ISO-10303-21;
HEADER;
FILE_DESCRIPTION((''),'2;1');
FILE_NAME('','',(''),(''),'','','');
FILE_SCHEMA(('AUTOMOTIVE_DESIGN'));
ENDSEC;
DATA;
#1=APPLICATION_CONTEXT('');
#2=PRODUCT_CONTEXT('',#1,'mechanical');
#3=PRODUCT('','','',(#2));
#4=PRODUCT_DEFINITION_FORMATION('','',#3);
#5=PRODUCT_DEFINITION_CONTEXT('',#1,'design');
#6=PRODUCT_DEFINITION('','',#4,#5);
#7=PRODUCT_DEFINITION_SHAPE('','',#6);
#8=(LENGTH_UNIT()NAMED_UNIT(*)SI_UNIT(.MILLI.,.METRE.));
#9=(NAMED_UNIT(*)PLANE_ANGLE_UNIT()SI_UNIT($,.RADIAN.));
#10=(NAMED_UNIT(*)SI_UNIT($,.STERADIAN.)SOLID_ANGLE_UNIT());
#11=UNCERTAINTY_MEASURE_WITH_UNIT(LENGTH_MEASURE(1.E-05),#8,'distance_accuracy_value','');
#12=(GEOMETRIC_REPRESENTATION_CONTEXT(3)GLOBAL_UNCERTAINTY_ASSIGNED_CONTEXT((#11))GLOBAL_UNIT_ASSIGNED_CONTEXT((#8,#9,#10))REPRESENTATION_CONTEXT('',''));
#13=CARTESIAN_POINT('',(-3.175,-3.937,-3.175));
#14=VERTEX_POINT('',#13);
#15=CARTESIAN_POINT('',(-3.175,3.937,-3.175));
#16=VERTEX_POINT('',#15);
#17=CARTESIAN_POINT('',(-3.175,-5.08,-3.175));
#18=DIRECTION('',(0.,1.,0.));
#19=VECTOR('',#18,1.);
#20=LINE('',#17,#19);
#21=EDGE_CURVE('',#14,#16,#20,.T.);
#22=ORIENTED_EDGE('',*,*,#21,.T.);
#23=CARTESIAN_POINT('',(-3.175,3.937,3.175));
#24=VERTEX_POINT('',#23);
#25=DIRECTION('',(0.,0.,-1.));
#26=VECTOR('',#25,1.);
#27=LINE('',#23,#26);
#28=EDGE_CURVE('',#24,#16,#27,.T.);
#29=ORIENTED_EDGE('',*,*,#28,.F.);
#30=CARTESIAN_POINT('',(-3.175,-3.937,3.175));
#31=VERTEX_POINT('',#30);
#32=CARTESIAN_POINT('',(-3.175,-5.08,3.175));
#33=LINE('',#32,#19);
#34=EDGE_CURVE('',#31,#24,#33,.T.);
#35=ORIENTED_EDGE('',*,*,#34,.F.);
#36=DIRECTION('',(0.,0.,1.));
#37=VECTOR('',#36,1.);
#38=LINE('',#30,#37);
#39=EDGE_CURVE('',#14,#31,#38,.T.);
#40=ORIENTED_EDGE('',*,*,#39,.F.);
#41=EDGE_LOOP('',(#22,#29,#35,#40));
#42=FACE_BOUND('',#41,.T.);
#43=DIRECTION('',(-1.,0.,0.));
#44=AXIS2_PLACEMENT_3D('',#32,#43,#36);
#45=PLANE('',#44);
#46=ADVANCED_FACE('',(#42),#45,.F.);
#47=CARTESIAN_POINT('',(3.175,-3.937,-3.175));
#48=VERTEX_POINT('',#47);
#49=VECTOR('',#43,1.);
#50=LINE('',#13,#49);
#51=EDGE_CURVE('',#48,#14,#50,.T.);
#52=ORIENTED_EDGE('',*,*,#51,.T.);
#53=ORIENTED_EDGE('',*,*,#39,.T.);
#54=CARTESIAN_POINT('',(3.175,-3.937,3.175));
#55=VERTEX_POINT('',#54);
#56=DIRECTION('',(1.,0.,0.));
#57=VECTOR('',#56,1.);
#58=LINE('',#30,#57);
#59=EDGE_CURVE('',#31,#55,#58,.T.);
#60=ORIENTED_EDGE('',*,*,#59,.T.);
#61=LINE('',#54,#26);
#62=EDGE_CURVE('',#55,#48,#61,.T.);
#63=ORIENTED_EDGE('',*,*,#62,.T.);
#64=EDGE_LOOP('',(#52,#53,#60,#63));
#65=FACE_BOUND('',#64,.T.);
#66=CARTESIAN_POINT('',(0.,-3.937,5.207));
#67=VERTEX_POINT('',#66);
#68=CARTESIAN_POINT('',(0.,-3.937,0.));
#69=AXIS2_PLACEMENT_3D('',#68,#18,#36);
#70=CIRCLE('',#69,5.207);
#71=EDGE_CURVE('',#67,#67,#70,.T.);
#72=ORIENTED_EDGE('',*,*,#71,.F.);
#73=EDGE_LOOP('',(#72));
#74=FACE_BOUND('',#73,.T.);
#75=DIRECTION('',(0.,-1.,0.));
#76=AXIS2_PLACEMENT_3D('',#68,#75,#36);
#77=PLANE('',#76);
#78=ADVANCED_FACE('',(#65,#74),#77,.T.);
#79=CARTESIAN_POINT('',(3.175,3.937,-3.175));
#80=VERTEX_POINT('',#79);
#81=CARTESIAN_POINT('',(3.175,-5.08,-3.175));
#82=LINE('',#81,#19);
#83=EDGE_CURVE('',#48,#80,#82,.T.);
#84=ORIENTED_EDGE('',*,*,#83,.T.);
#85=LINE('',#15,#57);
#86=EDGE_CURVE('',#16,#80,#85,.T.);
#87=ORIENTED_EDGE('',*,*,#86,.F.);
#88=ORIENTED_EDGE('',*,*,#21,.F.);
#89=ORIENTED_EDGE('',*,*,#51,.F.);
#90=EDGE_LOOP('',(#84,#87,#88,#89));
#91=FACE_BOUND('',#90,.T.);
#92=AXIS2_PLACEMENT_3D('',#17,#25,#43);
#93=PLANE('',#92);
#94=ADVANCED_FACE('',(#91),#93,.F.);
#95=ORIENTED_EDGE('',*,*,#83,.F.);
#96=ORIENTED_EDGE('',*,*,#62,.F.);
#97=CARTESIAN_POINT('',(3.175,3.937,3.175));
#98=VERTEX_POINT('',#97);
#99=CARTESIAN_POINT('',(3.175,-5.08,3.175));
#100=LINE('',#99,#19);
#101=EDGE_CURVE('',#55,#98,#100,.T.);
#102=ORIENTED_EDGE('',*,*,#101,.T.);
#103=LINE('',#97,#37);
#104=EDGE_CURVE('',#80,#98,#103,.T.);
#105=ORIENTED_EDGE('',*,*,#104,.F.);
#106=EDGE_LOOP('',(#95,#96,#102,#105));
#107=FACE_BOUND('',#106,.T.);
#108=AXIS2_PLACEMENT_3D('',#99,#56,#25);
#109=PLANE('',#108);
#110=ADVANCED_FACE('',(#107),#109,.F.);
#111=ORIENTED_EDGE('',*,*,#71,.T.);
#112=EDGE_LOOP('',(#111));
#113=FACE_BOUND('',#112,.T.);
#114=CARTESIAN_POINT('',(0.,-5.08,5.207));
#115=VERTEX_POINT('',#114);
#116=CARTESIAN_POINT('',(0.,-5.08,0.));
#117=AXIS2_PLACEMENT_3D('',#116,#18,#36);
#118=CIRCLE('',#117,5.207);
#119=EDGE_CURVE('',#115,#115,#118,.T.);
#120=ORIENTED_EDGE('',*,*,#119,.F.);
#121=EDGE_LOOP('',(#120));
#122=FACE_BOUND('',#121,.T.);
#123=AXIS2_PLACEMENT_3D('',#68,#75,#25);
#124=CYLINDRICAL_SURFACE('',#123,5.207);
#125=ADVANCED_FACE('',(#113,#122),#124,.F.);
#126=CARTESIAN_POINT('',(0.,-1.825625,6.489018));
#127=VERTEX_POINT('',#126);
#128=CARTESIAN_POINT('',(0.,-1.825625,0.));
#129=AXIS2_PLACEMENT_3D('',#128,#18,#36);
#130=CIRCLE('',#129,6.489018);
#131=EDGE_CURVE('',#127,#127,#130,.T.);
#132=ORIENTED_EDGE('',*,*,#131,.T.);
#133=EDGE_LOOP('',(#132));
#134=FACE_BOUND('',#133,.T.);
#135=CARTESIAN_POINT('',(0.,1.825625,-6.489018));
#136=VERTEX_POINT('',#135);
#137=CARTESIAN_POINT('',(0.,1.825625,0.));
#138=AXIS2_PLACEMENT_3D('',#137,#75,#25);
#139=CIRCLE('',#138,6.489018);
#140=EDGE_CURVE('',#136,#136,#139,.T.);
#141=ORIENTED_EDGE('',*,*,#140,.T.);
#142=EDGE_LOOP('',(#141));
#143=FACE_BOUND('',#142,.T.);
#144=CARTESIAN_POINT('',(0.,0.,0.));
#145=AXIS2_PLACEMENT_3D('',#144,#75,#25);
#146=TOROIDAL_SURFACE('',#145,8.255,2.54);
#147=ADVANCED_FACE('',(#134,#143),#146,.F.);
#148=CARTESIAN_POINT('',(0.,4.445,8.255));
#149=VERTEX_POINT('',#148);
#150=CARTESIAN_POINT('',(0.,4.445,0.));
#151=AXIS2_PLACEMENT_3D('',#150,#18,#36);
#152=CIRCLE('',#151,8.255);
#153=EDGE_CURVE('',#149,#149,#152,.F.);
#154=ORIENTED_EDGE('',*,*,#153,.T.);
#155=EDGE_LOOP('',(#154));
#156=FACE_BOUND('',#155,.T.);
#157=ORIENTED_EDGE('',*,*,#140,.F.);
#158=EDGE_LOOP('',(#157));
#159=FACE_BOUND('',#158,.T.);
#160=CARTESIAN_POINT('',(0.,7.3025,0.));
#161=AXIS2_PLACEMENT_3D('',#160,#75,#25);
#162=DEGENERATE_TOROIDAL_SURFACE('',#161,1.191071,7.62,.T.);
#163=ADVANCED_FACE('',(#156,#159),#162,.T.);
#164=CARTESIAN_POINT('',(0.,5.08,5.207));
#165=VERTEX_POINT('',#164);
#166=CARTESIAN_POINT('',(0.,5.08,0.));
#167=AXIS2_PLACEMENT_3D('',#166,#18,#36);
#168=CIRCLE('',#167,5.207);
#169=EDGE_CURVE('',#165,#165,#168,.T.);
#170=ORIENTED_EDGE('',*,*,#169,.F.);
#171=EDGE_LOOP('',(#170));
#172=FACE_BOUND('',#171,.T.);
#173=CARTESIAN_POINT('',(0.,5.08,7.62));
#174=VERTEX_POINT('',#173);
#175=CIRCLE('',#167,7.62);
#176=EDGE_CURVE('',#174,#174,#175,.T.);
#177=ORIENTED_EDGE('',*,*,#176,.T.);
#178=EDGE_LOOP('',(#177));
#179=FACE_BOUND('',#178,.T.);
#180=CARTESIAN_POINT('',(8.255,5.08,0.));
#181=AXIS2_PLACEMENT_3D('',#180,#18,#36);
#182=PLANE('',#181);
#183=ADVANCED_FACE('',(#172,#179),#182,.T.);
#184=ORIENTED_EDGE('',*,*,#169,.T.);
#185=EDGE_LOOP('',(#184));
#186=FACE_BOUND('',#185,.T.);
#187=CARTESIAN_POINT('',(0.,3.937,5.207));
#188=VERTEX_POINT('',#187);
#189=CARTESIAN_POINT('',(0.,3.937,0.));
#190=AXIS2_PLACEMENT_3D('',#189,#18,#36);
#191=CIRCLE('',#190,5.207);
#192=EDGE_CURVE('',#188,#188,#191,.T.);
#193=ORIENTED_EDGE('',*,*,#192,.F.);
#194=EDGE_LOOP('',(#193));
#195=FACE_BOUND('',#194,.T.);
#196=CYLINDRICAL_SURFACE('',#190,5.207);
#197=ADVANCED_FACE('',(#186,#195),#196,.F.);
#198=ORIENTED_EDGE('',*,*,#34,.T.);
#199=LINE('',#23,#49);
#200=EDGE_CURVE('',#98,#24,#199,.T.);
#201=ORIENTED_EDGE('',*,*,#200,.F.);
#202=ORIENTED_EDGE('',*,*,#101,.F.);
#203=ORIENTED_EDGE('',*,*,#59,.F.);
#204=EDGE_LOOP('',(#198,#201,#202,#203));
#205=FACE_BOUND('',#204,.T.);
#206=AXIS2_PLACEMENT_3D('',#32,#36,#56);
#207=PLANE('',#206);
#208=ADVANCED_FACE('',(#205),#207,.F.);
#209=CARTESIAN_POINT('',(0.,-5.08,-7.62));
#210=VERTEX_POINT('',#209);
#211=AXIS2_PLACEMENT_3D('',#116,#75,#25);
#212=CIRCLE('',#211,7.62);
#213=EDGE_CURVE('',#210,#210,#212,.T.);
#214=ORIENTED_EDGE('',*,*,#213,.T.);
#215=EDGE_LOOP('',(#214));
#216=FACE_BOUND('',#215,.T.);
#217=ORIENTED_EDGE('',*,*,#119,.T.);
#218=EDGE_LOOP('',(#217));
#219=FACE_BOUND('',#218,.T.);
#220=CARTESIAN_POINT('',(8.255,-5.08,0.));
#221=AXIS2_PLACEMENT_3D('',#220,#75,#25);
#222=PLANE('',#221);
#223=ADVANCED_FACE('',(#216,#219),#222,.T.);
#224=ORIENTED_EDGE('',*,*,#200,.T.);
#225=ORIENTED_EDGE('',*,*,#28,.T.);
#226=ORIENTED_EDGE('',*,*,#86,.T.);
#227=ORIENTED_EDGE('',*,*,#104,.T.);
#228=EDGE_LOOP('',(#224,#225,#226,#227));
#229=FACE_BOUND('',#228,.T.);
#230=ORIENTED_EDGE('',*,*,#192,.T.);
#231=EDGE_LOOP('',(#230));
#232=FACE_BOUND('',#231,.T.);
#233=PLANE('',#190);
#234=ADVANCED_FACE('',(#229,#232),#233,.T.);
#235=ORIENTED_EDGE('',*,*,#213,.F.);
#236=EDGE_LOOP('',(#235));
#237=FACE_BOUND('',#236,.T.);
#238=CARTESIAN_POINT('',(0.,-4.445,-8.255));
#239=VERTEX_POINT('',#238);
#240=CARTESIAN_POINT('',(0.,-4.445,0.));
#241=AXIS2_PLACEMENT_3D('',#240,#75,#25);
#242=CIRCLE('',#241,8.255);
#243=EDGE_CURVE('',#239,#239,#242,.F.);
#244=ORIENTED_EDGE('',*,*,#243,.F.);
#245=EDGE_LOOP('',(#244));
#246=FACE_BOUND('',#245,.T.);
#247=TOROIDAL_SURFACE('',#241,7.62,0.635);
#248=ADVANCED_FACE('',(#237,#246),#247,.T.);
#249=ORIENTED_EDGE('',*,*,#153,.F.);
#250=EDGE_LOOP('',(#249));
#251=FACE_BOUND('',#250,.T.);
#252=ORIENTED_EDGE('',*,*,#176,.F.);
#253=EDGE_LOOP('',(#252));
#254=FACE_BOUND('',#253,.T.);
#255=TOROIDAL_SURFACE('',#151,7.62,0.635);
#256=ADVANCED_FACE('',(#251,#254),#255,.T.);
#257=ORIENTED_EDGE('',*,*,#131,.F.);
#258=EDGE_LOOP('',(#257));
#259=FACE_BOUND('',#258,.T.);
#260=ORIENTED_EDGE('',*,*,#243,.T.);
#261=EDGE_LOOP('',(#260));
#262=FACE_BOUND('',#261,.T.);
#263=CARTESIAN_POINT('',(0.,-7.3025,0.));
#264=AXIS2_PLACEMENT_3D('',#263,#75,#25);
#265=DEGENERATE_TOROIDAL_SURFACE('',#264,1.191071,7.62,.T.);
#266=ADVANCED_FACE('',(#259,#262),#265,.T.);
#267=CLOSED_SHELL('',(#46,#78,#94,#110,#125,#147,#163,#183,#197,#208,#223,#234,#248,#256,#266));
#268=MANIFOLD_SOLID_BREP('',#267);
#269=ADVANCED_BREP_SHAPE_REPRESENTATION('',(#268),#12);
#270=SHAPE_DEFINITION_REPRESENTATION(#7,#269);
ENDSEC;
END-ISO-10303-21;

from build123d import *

# Parameters (mm, degrees)
SKETCH3_W          = 6.35
SKETCH3_H          = 6.35
CUT_EXTRUDE2_DEPTH = 16.476293161
SKETCH4_R          = 5.207
CUT_EXTRUDE3_DEPTH = 1.143
FILLET1_R          = 0.635
FILLET2_R          = 7.62


with BuildPart() as part:
    # Sketch1 → Revolve1 (revolve)
    with BuildSketch(Plane.XY, mode=Mode.PRIVATE) as revolve1_sk:
        with BuildLine():
            Line((8.255, -2.54), (8.255, -5.08))
            Line((8.255, -5.08), (0, -5.08))
            Line((0, -5.08), (0, 5.08))
            Line((0, 5.08), (8.255, 5.08))
            Line((8.255, 5.08), (8.255, 2.54))
            ThreePointArc((8.255, 2.54), (5.715, 0), (8.255, -2.54))
        make_face()
    revolve(revolve1_sk.sketch.rotate(Axis((0, -5.08, 0), (0, 1, 0)), 90), axis=Axis((0, -5.08, 0), (0, 1, 0)))

    # Sketch3 → Cut-Extrude2 (cut, through all)
    with BuildSketch(Plane(origin=(0, 5.08, 0), x_dir=(1, 0, 0), z_dir=(0, 1, 0))):
        Rectangle(SKETCH3_W, SKETCH3_H)
    extrude(amount=-CUT_EXTRUDE2_DEPTH, mode=Mode.SUBTRACT)

    # Sketch4 → Cut-Extrude3 (cut)
    with BuildSketch(Plane(origin=(0, 5.08, 0), x_dir=(1, 0, 0), z_dir=(0, 1, 0))):
        with Locations(Location((0, 0, 0), (0, 0, 270))):
            Circle(SKETCH4_R)
    cut_extrude3 = extrude(amount=-CUT_EXTRUDE3_DEPTH, mode=Mode.SUBTRACT)

    # Mirror1: Cut-Extrude3 across plane
    add(cut_extrude3.mirror(Plane.ZX), mode=Mode.SUBTRACT)

    # Fillet1
    fillet1_edges = [part.edges().sort_by_distance(p)[0] for p in [
        (0, 5.08, 8.255),
        (0, -5.08, 8.255),
    ]]
    fillet(fillet1_edges, radius=FILLET1_R)

    # Fillet2
    # the kernel refuses this fillet: 7.62 mm, written as the material it takes off along each edge
    with BuildSketch(Plane(origin=(0, 2.54, 0), x_dir=(0, 0, -1), z_dir=(1, 0, 0))) as fillet2_piece_1:
        with BuildLine():
            CenterArc((1.191070941, 4.7625), FILLET2_R, 314.048625674, 23.927061489)
            Line((8.255, 1.905), (8.396278581, 1.84785))
            ThreePointArc((8.396278581, 1.84785), (8.4074, 0.9525), (8.4074, 0))
            Line((8.4074, 0), (8.255, -0.1524))
            ThreePointArc((8.255, -0.1524), (7.35965, -0.326635562), (6.594976671, -0.8239125))
            Line((6.594976671, -0.8239125), (6.489017735, -0.714375))
        make_face()
    revolve(axis=Axis((0, 2.54, 0), (0, 1, 0)), mode=Mode.SUBTRACT)
    with BuildSketch(Plane(origin=(0, -2.54, 0), x_dir=(0, 0, -1), z_dir=(1, 0, 0))) as fillet2_piece_2:
        with BuildLine():
            CenterArc((1.191070941, -4.7625), FILLET2_R, 22.024312837, 23.927061489)
            Line((6.489017735, 0.714375), (6.594976671, 0.8239125))
            ThreePointArc((6.594976671, 0.8239125), (7.35965, 0.326635562), (8.255, 0.1524))
            Line((8.255, 0.1524), (8.4074, 0))
            ThreePointArc((8.4074, 0), (8.4074, -0.9525), (8.396278581, -1.84785))
            Line((8.396278581, -1.84785), (8.255, -1.905))
        make_face()
    revolve(axis=Axis((0, -2.54, 0), (0, 1, 0)), mode=Mode.SUBTRACT)


solid = part.part
